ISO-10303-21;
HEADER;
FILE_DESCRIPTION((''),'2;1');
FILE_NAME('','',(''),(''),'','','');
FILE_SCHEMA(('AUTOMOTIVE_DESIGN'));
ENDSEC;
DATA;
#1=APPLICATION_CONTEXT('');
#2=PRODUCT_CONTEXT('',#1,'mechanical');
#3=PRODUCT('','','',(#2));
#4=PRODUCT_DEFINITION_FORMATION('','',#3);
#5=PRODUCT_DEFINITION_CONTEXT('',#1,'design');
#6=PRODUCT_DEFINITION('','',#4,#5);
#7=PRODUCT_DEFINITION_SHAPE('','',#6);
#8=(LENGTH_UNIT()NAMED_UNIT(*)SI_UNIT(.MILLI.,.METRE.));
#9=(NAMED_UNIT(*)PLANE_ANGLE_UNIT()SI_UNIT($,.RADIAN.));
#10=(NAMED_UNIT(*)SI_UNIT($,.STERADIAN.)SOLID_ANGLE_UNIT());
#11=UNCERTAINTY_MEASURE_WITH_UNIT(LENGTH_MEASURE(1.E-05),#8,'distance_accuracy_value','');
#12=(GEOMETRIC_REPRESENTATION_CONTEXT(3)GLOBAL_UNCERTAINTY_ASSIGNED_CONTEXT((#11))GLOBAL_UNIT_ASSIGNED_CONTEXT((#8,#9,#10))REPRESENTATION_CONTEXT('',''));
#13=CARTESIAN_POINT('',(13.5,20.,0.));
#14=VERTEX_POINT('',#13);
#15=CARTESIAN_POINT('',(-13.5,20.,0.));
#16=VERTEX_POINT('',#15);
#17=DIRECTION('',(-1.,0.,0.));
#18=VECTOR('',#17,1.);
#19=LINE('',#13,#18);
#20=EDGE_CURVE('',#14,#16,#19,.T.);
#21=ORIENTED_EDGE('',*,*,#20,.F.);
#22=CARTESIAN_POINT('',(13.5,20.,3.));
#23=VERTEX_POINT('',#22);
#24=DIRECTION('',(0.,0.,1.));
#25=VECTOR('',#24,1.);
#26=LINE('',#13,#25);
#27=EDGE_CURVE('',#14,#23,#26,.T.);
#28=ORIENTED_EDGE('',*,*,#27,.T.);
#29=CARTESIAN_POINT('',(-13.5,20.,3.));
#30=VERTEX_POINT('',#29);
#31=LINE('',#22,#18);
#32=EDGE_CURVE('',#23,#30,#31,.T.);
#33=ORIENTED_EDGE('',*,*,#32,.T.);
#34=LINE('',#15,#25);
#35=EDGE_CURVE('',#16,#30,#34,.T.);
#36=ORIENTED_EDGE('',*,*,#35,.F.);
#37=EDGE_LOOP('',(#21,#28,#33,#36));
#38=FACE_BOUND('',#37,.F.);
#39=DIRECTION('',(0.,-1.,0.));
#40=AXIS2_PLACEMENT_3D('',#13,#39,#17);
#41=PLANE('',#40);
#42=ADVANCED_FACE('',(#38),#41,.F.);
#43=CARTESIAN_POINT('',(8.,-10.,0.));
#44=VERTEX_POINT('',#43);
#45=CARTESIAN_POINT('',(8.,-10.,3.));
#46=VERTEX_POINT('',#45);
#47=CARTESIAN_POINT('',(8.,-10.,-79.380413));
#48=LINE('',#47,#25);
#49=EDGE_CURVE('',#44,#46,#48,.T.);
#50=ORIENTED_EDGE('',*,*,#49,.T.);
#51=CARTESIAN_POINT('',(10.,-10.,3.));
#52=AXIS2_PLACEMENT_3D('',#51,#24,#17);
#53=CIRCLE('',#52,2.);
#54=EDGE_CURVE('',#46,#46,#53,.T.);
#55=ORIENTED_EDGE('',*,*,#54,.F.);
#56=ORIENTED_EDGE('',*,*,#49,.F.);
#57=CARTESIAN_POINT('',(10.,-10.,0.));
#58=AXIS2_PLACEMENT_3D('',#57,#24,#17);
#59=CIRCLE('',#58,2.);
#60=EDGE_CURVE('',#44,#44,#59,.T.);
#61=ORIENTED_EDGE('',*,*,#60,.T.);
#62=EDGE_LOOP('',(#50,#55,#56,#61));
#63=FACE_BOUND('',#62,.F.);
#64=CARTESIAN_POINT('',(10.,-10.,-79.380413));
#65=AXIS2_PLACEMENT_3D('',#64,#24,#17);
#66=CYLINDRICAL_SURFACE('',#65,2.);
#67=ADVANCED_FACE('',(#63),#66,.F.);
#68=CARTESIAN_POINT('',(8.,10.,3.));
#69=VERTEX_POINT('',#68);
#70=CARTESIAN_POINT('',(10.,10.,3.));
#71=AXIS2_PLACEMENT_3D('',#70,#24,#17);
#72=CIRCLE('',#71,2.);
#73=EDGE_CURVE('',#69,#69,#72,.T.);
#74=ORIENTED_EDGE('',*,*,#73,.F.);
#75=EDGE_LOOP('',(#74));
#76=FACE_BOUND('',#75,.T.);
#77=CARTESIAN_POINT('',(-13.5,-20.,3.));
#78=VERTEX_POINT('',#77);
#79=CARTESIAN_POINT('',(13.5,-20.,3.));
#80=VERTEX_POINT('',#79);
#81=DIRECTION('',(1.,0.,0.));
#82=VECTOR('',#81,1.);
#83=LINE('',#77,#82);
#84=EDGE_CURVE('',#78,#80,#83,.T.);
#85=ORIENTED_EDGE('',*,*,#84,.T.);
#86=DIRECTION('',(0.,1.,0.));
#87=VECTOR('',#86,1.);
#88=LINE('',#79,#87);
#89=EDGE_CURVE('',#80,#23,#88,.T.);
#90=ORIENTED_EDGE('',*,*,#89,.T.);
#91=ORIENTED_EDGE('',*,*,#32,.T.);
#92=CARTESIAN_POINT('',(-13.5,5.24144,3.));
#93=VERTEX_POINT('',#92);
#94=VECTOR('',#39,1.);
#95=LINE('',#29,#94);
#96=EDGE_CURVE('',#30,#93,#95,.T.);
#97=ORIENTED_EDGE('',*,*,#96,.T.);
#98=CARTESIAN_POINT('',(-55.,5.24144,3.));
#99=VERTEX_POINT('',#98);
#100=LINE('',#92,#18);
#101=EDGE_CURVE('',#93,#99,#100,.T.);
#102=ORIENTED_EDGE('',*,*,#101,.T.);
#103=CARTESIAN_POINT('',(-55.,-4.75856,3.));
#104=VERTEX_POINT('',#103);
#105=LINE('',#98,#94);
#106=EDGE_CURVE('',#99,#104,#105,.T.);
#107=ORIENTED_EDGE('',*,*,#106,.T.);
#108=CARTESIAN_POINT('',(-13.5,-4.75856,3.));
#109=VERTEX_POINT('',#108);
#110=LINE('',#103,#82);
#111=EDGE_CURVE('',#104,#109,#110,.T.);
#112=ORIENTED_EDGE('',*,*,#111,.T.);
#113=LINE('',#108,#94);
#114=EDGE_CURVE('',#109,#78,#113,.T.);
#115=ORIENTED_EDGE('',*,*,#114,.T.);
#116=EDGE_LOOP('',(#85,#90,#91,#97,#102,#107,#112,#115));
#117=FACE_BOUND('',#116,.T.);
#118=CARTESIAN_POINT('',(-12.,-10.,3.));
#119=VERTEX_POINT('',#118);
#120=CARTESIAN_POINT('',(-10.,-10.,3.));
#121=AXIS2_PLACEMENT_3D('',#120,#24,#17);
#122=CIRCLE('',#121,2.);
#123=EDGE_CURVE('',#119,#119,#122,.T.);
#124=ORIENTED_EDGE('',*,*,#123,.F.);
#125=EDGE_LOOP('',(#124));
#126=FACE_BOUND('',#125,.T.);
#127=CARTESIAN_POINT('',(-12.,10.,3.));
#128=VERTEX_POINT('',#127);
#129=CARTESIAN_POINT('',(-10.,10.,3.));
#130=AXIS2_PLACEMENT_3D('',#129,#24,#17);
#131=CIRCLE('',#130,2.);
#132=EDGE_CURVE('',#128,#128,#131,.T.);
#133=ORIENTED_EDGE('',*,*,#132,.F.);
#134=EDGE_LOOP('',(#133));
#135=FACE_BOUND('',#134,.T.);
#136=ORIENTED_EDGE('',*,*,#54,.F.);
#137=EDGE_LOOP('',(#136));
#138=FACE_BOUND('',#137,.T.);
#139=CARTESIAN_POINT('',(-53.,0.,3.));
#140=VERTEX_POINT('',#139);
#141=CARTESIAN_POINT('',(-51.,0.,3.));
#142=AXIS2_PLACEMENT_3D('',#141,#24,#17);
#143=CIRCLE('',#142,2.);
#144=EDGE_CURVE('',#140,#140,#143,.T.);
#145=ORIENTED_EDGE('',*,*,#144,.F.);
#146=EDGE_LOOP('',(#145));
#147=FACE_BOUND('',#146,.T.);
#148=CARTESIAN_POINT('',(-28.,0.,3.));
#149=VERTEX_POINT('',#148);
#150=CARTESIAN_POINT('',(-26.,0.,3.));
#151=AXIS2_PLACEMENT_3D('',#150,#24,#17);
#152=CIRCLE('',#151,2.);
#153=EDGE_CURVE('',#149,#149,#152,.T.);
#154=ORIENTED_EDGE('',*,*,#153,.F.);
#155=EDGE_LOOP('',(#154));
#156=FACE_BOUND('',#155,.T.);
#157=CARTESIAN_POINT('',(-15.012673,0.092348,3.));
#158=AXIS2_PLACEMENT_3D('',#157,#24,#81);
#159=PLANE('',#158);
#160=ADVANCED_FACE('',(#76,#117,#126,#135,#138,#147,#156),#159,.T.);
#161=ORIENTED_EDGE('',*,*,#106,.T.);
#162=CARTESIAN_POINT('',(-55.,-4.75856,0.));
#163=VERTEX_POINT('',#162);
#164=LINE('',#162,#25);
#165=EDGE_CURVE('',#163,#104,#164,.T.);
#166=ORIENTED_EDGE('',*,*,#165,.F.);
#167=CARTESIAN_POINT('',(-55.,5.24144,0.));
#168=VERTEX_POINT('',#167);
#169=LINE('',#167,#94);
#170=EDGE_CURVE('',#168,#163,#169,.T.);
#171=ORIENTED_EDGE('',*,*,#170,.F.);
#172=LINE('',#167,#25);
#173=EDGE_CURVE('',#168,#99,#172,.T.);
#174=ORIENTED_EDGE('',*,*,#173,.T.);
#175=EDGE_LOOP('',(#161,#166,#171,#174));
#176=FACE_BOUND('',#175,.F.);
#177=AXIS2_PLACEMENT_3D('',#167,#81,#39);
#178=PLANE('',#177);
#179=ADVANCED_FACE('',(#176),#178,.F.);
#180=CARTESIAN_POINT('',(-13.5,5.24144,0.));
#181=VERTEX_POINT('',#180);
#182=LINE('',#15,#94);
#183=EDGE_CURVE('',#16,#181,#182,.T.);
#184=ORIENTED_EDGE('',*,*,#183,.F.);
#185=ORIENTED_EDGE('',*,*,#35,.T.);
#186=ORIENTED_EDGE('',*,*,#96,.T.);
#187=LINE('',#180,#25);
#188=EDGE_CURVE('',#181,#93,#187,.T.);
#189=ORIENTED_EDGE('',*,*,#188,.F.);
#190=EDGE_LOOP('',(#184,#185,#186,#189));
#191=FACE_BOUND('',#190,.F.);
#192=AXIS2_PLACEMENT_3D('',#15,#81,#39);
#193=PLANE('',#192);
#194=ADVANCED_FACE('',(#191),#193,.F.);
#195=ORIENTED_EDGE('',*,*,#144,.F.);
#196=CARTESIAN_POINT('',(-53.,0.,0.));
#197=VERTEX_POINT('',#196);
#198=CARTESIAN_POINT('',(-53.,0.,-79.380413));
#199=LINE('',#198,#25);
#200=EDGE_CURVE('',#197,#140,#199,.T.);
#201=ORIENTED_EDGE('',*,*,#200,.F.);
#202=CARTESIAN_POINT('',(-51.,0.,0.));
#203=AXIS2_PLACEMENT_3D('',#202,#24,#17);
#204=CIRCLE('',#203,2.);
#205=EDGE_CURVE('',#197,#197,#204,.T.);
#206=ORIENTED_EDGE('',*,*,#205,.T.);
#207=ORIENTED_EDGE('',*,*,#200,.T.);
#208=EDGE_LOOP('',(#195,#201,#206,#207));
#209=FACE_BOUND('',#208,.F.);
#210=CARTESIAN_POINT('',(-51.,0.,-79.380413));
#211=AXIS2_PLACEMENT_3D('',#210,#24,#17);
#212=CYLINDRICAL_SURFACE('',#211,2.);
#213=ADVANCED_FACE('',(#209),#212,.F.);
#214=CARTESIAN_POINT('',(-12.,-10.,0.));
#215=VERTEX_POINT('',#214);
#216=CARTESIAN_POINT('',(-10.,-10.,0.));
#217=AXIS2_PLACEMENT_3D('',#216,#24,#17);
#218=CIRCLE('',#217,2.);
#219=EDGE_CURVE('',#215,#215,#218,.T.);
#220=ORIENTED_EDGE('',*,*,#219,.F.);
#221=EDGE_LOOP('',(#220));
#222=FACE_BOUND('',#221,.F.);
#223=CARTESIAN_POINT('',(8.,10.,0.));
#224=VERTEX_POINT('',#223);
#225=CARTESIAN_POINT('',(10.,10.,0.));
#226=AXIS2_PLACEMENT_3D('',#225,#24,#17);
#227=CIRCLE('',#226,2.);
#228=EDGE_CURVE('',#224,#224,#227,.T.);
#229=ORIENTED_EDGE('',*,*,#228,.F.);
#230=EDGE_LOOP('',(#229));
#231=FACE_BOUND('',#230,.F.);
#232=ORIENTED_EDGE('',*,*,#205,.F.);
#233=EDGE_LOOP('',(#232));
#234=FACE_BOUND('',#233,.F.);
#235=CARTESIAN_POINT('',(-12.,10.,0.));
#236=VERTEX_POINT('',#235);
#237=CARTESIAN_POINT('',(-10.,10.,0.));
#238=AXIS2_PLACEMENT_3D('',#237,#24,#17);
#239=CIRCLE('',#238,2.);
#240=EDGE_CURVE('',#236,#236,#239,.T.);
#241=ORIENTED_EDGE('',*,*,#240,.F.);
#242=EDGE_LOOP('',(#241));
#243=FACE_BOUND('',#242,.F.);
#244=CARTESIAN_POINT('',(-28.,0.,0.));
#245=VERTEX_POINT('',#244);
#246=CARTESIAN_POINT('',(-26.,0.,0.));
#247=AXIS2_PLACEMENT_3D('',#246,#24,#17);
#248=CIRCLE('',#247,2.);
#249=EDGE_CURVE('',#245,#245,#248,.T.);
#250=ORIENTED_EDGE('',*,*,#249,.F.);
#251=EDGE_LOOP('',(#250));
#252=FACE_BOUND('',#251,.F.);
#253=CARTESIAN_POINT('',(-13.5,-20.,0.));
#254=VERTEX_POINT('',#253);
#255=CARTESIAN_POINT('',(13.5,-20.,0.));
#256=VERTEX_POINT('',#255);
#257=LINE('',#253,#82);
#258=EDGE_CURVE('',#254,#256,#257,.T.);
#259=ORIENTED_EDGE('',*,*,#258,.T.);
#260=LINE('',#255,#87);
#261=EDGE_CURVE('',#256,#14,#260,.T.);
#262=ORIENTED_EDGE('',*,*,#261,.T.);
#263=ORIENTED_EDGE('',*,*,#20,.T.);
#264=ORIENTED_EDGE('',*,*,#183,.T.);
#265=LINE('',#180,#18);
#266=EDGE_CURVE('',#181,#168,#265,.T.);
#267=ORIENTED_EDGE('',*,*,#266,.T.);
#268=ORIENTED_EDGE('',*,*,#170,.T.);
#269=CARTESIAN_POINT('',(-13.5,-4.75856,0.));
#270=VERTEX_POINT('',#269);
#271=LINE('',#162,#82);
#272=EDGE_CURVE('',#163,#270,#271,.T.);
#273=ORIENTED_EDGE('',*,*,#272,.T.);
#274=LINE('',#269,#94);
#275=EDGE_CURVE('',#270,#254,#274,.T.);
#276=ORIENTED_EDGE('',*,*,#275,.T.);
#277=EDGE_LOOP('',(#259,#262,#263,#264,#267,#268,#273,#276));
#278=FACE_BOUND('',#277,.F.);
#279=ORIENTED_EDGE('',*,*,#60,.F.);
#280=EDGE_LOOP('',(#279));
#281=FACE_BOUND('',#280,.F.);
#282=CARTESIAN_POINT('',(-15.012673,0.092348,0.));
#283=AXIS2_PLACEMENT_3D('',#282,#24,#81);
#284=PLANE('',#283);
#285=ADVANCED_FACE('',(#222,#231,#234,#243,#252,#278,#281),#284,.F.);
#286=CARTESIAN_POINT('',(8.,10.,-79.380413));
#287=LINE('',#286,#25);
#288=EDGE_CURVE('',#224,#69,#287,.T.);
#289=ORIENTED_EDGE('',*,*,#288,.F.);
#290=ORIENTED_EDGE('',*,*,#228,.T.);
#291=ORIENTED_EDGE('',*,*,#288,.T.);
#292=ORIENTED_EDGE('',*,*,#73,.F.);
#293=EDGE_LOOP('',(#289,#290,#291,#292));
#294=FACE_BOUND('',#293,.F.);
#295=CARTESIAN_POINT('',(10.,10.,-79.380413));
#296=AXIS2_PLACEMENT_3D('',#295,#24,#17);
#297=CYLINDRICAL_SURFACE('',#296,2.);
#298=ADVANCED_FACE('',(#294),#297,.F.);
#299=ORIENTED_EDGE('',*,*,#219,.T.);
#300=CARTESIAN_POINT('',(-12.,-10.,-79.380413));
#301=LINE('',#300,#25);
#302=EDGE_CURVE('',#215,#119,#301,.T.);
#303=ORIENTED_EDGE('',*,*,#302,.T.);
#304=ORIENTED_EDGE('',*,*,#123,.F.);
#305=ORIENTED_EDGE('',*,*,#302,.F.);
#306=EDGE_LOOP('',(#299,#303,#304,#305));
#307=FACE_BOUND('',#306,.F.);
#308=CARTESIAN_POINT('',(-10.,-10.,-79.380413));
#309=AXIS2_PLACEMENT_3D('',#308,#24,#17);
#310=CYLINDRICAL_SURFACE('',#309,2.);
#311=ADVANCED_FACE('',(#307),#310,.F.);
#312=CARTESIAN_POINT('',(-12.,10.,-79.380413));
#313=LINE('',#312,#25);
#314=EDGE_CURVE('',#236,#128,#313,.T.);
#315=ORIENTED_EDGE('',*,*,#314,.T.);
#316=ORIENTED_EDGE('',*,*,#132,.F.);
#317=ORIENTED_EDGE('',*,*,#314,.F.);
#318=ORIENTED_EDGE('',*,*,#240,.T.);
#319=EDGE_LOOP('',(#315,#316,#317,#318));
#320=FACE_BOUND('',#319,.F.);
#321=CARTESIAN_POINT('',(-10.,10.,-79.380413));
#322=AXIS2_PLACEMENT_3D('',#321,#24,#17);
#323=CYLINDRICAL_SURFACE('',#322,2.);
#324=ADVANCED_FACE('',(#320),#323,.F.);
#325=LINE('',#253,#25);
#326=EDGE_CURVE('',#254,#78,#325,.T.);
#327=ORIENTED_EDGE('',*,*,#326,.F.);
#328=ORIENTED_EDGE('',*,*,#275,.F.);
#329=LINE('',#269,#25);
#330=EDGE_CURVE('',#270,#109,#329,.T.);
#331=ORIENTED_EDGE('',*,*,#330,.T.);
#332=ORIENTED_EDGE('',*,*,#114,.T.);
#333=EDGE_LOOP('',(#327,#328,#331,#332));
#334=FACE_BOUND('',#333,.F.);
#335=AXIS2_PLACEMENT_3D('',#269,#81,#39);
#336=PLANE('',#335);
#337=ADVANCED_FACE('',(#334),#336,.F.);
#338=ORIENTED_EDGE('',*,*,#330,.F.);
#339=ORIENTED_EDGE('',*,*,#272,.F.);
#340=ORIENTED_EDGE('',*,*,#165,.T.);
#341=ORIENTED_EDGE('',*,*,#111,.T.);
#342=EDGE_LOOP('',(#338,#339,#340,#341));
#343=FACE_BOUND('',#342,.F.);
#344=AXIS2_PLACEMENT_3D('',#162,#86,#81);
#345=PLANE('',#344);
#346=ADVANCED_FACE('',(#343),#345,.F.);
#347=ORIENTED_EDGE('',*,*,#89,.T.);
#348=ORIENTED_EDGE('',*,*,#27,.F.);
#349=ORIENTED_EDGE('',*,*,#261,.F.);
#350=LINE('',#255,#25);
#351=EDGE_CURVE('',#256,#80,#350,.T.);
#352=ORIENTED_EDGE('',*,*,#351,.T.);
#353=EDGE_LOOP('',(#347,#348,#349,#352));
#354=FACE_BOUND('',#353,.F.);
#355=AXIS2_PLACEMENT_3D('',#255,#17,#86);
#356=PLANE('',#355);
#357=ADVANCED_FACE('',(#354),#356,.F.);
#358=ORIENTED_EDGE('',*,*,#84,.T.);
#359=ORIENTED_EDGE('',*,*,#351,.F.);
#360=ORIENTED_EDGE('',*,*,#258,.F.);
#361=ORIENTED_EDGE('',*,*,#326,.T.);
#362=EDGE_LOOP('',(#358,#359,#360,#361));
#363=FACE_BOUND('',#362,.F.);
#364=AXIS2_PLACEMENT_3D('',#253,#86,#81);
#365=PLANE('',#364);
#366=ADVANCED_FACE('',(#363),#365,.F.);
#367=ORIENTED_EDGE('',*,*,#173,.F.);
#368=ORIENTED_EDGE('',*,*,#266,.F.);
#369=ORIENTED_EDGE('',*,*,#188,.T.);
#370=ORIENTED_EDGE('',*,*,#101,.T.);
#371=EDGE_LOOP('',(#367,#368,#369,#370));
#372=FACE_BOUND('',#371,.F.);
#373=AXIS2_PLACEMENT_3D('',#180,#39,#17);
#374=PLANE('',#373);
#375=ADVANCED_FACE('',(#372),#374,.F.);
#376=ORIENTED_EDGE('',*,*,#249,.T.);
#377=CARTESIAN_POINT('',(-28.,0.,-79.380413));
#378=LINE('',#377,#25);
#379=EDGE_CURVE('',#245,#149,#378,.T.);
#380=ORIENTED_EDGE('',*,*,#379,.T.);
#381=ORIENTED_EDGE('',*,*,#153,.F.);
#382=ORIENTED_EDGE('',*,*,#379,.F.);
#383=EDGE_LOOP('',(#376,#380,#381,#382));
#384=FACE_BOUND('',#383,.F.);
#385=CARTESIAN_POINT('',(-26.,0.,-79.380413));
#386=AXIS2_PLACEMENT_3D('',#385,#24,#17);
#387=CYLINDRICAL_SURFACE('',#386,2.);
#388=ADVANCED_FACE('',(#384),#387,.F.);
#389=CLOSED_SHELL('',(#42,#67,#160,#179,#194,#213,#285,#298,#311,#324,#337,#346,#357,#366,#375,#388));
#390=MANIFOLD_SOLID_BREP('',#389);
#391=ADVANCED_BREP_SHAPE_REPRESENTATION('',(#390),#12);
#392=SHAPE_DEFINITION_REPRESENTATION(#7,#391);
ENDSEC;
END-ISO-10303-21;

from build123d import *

# Parameters (mm, degrees)
F1_DEPTH = 3
F2_D     = 4


with BuildPart() as f1:
    # F0 (on Top) → F1 (new body)
    with BuildSketch(Plane.XY):
        Polygon((-13.5, -20), (13.5, -20), (13.5, 20), (-13.5, 20), (-13.5, 5.2414399013), (-55, 5.2414399013), (-55, -4.7585600987), (-13.5, -4.7585600987), align=None)
    extrude(amount=F1_DEPTH)

    # F2 (through all)
    with Locations(Plane(origin=(0, 0, 0), x_dir=(1, 0, 0), z_dir=(0, 0, -1))):
        with Locations((-51, 0), (-26, 0), (-10, 10), (10, -10), (10, 10), (-10, -10)):
            Hole(F2_D / 2)


solid = f1.part
